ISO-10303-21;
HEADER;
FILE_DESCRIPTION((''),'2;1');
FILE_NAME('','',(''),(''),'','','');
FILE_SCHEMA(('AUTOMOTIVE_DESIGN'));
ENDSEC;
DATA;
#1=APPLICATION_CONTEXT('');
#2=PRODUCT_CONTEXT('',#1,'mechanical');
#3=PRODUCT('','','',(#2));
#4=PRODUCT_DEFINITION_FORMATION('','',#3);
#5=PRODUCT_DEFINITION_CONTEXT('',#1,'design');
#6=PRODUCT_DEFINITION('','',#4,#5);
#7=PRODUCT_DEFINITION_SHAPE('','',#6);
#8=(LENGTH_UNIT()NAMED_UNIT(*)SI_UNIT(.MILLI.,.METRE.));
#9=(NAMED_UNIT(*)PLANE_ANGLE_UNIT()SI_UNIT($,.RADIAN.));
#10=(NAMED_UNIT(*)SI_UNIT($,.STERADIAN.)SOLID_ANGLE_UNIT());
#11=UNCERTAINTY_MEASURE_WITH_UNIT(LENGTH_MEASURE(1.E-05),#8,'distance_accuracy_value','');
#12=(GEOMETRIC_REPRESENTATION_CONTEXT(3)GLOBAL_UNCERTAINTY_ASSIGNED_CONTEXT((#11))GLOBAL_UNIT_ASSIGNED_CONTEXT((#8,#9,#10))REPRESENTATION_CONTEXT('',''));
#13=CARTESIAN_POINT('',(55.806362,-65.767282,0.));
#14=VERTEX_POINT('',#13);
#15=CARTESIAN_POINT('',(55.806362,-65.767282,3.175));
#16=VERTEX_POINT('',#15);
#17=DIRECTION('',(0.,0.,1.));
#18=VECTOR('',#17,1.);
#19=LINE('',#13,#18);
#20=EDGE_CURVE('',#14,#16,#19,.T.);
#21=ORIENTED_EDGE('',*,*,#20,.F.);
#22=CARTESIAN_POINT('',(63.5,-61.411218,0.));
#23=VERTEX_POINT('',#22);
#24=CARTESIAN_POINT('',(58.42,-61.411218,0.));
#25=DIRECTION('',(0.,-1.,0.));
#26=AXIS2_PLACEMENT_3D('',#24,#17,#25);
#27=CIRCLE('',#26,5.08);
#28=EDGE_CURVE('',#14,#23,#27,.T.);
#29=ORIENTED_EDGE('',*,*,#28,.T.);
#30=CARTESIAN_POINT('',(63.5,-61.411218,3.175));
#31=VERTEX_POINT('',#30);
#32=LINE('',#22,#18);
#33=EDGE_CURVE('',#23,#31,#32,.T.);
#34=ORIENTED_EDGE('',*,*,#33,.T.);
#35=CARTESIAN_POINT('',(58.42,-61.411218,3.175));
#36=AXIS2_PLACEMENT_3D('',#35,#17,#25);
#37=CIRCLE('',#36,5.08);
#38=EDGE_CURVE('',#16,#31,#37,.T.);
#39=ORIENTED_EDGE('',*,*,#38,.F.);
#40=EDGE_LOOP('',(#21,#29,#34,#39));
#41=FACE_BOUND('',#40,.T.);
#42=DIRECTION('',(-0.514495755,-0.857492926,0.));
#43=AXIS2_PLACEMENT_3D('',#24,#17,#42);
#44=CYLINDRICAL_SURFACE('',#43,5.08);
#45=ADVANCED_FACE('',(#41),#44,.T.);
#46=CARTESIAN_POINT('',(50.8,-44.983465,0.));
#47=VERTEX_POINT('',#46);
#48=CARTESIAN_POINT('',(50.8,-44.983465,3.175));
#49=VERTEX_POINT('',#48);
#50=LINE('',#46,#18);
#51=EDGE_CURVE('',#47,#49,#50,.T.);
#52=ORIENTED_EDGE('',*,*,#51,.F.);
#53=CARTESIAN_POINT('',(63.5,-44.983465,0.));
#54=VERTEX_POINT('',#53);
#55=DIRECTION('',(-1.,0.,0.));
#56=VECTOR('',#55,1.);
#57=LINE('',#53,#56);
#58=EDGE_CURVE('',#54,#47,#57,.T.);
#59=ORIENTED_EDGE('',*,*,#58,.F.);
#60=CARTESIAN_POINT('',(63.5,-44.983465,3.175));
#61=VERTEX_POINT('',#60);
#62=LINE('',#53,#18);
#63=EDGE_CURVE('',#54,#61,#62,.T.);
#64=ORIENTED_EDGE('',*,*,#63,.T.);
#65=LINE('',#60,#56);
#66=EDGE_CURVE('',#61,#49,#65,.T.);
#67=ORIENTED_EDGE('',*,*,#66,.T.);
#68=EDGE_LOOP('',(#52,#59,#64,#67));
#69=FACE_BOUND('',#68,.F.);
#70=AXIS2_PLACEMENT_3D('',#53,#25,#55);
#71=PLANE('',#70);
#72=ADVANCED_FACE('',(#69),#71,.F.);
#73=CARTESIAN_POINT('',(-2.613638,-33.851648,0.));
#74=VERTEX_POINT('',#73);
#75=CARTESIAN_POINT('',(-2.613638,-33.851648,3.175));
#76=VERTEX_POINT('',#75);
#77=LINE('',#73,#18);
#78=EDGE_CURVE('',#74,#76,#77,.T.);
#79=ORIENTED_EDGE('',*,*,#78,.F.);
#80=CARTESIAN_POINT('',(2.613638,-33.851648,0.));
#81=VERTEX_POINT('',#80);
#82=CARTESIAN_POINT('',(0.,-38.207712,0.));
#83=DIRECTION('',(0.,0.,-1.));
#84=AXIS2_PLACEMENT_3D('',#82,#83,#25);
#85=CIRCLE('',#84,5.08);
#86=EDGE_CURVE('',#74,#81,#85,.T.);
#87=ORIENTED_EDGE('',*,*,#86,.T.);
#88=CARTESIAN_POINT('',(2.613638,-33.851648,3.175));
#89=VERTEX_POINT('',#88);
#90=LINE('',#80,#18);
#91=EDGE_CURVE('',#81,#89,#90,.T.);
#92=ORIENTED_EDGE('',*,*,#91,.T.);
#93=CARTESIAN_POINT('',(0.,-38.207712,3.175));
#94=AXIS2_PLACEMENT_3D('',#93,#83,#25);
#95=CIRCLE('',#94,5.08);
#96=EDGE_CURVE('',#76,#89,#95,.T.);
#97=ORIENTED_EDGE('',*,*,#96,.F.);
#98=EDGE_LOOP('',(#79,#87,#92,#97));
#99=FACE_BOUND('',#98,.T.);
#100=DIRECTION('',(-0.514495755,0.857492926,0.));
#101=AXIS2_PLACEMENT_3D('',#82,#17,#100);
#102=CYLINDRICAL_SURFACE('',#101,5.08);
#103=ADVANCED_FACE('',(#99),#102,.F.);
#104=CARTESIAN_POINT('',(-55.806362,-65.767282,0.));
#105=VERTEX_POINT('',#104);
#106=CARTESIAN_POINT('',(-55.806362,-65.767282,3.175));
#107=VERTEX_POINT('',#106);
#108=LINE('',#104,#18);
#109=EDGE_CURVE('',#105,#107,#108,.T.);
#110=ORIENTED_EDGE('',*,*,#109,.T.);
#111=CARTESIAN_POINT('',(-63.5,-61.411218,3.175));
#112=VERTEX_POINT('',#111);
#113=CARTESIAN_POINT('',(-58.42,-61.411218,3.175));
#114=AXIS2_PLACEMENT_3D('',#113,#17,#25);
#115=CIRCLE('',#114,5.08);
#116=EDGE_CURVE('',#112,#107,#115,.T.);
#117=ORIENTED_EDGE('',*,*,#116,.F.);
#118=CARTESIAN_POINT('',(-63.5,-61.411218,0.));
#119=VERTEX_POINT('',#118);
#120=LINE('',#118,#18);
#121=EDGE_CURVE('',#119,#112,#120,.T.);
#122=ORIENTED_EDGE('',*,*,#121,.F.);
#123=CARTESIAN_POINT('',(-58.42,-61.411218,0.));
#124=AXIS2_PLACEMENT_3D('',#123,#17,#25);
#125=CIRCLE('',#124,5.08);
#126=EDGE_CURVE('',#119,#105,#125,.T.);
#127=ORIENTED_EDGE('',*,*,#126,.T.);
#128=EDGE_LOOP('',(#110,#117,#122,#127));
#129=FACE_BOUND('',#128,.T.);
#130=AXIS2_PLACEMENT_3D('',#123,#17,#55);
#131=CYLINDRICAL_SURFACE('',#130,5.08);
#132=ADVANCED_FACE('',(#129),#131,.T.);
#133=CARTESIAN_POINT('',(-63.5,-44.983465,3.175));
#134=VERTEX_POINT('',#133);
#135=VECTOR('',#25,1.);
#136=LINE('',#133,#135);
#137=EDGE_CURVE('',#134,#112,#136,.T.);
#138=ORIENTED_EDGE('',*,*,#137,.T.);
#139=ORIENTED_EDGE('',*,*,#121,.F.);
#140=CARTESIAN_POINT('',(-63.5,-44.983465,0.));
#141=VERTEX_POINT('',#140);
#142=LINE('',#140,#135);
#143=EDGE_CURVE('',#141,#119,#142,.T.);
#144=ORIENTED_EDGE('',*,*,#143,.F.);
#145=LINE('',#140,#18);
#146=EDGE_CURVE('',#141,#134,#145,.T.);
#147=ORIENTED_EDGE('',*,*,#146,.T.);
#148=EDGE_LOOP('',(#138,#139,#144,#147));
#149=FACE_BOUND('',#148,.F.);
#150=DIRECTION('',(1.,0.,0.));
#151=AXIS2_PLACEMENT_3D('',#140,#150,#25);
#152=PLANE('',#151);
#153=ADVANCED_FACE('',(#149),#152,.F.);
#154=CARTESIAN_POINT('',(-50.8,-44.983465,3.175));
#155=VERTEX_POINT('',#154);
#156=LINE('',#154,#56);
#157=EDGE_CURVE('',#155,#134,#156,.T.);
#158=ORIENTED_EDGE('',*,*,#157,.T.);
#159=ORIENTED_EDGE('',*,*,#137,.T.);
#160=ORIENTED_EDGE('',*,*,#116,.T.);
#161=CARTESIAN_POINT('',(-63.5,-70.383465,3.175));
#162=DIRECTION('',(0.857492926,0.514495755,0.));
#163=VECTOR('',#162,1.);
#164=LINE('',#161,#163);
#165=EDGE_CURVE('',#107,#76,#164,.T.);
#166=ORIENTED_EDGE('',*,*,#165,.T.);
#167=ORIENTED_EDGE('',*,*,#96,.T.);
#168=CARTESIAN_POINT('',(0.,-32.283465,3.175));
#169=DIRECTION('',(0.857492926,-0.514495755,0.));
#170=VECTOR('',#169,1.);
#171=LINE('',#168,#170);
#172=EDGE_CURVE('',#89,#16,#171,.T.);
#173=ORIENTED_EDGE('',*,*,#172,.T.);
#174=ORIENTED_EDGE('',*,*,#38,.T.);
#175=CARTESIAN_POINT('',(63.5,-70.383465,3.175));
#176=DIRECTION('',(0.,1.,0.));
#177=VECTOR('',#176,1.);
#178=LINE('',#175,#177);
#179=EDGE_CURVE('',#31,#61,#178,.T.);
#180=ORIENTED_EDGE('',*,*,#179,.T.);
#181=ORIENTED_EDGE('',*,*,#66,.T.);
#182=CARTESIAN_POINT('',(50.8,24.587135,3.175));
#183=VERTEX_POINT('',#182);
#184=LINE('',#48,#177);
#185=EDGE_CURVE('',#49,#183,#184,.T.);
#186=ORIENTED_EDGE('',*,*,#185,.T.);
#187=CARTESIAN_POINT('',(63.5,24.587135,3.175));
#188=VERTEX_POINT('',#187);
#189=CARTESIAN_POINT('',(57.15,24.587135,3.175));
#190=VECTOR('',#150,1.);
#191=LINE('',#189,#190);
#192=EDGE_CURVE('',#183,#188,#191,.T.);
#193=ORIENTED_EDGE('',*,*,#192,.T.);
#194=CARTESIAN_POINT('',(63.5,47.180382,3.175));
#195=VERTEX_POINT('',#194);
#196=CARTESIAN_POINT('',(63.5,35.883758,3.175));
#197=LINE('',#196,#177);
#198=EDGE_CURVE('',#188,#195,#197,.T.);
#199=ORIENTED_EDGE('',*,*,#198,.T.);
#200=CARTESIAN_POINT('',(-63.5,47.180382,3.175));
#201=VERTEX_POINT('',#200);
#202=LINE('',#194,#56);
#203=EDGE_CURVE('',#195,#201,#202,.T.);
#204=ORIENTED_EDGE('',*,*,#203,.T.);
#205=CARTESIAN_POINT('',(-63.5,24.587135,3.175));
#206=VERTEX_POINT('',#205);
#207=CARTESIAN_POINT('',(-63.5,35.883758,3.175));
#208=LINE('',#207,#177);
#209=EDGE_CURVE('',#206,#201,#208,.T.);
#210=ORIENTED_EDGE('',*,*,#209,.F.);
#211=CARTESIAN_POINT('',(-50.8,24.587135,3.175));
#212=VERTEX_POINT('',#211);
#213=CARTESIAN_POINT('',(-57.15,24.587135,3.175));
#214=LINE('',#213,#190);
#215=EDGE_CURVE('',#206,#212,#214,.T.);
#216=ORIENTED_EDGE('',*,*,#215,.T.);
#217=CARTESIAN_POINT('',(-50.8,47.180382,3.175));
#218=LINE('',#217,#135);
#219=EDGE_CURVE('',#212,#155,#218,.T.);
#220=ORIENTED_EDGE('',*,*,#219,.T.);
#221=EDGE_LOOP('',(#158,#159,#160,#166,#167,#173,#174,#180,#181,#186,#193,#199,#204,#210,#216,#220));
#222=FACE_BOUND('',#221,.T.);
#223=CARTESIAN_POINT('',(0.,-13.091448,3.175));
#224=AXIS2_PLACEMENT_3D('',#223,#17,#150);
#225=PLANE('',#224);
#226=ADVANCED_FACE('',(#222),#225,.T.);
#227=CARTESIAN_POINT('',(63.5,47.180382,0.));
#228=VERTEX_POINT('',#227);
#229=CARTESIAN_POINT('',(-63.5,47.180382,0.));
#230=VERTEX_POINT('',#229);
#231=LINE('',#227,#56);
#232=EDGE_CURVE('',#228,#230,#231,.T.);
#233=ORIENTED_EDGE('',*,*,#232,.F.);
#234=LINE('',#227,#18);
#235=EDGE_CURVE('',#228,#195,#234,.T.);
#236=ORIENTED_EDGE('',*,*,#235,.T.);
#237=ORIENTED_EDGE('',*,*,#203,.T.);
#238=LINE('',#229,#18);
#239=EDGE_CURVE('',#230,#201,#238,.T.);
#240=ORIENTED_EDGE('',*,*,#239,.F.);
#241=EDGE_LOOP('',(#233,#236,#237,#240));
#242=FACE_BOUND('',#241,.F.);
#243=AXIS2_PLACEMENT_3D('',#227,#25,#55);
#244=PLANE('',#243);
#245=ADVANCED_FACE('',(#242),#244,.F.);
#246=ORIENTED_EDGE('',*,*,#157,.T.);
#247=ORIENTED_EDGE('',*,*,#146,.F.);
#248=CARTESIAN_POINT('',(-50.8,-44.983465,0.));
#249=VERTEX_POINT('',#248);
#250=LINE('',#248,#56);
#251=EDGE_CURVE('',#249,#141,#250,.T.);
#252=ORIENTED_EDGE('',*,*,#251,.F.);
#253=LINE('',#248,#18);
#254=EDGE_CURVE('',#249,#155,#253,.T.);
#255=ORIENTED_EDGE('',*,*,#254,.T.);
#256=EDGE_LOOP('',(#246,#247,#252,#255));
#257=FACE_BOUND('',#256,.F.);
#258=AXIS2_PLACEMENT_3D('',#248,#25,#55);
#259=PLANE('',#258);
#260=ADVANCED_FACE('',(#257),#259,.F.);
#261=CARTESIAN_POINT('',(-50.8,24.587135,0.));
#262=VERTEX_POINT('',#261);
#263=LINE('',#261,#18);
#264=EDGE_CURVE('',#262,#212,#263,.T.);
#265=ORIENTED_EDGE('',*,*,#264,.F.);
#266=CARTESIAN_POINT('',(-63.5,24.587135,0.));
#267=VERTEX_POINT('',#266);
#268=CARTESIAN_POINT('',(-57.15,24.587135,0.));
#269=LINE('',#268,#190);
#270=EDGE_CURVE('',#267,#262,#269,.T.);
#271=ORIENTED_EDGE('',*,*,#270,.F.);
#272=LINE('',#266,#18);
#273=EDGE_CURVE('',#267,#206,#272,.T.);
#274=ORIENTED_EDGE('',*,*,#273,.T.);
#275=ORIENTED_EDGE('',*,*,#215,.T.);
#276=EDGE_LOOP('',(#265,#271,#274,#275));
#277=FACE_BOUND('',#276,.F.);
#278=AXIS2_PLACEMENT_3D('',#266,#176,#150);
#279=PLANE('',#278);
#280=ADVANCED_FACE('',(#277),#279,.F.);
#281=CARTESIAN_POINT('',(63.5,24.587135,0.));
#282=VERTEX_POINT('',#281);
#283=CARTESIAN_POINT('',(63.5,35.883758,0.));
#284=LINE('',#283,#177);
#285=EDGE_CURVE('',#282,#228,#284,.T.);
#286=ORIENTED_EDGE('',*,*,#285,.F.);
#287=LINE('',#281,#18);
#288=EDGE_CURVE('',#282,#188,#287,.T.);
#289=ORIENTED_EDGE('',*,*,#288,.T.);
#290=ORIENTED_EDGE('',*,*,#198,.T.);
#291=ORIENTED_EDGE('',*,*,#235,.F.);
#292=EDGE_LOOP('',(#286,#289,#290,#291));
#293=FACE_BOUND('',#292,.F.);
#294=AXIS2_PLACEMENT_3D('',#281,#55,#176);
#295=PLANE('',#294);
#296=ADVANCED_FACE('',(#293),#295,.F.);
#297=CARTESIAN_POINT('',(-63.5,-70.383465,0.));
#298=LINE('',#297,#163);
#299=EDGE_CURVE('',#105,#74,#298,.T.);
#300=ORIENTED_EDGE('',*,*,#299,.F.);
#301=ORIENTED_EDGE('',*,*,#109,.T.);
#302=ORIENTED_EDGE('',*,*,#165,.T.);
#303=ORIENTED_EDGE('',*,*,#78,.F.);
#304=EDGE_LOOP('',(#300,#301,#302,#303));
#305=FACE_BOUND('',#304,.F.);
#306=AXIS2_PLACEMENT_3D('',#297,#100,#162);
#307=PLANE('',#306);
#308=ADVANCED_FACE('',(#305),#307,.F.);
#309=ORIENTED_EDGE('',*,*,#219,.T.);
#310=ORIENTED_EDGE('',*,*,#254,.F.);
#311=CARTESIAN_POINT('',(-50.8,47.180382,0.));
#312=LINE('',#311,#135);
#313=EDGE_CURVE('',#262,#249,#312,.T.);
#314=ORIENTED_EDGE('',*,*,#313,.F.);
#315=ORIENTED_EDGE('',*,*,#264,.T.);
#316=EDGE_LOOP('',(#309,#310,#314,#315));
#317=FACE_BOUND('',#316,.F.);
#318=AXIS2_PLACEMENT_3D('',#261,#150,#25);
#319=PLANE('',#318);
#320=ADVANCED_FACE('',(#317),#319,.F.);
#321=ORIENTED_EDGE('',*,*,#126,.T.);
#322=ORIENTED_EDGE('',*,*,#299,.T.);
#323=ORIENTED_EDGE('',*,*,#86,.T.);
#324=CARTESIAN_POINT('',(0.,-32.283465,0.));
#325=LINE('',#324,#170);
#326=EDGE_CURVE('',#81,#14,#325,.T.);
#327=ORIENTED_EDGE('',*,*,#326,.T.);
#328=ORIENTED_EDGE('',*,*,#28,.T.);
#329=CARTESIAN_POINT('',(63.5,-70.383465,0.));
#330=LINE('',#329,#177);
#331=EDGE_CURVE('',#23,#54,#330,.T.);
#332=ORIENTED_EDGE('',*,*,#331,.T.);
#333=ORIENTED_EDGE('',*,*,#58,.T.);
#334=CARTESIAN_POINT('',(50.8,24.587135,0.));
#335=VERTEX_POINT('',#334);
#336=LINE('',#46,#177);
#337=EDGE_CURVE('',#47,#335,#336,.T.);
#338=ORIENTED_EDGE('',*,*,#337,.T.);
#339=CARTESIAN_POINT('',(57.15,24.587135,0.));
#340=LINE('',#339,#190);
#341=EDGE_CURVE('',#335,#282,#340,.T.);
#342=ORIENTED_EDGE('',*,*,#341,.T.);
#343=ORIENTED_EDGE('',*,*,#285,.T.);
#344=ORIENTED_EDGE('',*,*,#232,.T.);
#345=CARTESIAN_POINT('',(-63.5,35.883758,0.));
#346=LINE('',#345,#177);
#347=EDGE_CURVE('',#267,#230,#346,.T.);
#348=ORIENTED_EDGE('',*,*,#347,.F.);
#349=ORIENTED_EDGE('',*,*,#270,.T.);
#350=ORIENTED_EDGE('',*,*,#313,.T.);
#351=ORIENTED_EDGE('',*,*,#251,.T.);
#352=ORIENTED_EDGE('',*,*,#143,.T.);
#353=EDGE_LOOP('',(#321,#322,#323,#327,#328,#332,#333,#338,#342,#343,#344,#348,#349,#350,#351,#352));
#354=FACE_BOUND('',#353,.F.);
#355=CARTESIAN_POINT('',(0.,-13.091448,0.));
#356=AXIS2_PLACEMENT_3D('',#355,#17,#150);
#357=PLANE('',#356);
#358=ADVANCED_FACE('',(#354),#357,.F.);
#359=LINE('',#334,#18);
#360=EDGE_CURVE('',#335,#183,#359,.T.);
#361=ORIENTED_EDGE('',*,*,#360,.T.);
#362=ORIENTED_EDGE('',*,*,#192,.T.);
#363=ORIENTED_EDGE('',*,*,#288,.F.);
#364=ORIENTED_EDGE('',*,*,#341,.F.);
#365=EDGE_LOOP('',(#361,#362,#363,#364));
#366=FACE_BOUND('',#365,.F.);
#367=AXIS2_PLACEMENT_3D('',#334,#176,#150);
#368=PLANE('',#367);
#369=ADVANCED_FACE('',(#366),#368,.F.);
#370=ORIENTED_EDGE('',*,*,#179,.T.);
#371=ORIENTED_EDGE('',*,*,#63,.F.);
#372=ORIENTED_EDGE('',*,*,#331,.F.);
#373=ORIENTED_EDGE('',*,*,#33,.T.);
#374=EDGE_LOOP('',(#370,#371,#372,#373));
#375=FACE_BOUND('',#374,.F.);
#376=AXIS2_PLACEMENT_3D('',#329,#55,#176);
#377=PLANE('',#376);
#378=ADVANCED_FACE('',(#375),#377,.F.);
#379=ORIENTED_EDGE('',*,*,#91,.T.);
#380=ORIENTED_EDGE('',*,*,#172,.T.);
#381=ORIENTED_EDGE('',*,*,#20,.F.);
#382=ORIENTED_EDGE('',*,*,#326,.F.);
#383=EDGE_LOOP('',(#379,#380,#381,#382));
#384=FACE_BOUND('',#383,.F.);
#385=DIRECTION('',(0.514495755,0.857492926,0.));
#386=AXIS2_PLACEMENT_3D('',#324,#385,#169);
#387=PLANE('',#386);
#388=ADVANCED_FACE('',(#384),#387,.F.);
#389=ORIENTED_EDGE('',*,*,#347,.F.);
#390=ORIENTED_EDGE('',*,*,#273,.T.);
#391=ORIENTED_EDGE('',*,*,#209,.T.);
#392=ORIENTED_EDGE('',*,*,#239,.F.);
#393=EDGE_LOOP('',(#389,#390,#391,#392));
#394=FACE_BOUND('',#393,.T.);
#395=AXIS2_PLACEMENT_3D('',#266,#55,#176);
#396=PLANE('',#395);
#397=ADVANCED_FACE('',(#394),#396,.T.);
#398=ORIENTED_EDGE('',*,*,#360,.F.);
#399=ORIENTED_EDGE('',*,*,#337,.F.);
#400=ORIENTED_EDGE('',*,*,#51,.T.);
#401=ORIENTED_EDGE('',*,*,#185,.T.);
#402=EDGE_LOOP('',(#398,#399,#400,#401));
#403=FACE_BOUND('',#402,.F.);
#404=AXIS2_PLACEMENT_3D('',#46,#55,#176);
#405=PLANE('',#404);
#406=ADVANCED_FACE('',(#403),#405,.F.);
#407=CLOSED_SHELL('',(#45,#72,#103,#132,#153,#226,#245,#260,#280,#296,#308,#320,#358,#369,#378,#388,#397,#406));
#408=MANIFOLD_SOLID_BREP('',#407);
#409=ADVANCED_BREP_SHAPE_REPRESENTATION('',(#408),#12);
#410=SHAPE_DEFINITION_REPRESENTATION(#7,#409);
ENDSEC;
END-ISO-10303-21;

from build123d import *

# Parameters (mm, degrees)
F0_W     = 12.7
F0_H     = 22.5932470911
F1_DEPTH = 3.175
F2_R     = 5.08


# Not quite as in the source:
# - two fillets or chamfers of one size are made in one step
# - a feature names something its author has since deleted; it is built from what else it names


with BuildPart() as f1:
    # F0 (on Top) → F1 (new body)
    with BuildSketch(Plane.XY):
        Polygon((-50.8, 47.1803817213), (-50.8, 24.5871346301), (-50.8, -32.2834653699), (-50.8, -44.9834653699), (-63.5, -44.9834653699), (-63.5, -70.3834653699), (0, -32.2834653699), (63.5, -70.3834653699), (63.5, -44.9834653699), (50.8, -44.9834653699), (50.8, -32.2834653699), (50.8, 24.5871346301), (50.8, 47.1803817213), (0, 47.1803817213), align=None)
        with Locations((-57.15, 35.8837581757)):
            Rectangle(F0_W, F0_H)
        with Locations((57.15, 35.8837581757)):
            Rectangle(F0_W, F0_H)
    extrude(amount=F1_DEPTH)

    # F2
    f2_edges = [f1.edges().sort_by_distance(p)[0] for p in [
        (-63.5, -70.383465, 1.5875),
        (0, -32.283465, 1.5875),
        (63.5, -70.383465, 1.5875),
    ]]
    fillet(f2_edges, radius=F2_R)


solid = f1.part
